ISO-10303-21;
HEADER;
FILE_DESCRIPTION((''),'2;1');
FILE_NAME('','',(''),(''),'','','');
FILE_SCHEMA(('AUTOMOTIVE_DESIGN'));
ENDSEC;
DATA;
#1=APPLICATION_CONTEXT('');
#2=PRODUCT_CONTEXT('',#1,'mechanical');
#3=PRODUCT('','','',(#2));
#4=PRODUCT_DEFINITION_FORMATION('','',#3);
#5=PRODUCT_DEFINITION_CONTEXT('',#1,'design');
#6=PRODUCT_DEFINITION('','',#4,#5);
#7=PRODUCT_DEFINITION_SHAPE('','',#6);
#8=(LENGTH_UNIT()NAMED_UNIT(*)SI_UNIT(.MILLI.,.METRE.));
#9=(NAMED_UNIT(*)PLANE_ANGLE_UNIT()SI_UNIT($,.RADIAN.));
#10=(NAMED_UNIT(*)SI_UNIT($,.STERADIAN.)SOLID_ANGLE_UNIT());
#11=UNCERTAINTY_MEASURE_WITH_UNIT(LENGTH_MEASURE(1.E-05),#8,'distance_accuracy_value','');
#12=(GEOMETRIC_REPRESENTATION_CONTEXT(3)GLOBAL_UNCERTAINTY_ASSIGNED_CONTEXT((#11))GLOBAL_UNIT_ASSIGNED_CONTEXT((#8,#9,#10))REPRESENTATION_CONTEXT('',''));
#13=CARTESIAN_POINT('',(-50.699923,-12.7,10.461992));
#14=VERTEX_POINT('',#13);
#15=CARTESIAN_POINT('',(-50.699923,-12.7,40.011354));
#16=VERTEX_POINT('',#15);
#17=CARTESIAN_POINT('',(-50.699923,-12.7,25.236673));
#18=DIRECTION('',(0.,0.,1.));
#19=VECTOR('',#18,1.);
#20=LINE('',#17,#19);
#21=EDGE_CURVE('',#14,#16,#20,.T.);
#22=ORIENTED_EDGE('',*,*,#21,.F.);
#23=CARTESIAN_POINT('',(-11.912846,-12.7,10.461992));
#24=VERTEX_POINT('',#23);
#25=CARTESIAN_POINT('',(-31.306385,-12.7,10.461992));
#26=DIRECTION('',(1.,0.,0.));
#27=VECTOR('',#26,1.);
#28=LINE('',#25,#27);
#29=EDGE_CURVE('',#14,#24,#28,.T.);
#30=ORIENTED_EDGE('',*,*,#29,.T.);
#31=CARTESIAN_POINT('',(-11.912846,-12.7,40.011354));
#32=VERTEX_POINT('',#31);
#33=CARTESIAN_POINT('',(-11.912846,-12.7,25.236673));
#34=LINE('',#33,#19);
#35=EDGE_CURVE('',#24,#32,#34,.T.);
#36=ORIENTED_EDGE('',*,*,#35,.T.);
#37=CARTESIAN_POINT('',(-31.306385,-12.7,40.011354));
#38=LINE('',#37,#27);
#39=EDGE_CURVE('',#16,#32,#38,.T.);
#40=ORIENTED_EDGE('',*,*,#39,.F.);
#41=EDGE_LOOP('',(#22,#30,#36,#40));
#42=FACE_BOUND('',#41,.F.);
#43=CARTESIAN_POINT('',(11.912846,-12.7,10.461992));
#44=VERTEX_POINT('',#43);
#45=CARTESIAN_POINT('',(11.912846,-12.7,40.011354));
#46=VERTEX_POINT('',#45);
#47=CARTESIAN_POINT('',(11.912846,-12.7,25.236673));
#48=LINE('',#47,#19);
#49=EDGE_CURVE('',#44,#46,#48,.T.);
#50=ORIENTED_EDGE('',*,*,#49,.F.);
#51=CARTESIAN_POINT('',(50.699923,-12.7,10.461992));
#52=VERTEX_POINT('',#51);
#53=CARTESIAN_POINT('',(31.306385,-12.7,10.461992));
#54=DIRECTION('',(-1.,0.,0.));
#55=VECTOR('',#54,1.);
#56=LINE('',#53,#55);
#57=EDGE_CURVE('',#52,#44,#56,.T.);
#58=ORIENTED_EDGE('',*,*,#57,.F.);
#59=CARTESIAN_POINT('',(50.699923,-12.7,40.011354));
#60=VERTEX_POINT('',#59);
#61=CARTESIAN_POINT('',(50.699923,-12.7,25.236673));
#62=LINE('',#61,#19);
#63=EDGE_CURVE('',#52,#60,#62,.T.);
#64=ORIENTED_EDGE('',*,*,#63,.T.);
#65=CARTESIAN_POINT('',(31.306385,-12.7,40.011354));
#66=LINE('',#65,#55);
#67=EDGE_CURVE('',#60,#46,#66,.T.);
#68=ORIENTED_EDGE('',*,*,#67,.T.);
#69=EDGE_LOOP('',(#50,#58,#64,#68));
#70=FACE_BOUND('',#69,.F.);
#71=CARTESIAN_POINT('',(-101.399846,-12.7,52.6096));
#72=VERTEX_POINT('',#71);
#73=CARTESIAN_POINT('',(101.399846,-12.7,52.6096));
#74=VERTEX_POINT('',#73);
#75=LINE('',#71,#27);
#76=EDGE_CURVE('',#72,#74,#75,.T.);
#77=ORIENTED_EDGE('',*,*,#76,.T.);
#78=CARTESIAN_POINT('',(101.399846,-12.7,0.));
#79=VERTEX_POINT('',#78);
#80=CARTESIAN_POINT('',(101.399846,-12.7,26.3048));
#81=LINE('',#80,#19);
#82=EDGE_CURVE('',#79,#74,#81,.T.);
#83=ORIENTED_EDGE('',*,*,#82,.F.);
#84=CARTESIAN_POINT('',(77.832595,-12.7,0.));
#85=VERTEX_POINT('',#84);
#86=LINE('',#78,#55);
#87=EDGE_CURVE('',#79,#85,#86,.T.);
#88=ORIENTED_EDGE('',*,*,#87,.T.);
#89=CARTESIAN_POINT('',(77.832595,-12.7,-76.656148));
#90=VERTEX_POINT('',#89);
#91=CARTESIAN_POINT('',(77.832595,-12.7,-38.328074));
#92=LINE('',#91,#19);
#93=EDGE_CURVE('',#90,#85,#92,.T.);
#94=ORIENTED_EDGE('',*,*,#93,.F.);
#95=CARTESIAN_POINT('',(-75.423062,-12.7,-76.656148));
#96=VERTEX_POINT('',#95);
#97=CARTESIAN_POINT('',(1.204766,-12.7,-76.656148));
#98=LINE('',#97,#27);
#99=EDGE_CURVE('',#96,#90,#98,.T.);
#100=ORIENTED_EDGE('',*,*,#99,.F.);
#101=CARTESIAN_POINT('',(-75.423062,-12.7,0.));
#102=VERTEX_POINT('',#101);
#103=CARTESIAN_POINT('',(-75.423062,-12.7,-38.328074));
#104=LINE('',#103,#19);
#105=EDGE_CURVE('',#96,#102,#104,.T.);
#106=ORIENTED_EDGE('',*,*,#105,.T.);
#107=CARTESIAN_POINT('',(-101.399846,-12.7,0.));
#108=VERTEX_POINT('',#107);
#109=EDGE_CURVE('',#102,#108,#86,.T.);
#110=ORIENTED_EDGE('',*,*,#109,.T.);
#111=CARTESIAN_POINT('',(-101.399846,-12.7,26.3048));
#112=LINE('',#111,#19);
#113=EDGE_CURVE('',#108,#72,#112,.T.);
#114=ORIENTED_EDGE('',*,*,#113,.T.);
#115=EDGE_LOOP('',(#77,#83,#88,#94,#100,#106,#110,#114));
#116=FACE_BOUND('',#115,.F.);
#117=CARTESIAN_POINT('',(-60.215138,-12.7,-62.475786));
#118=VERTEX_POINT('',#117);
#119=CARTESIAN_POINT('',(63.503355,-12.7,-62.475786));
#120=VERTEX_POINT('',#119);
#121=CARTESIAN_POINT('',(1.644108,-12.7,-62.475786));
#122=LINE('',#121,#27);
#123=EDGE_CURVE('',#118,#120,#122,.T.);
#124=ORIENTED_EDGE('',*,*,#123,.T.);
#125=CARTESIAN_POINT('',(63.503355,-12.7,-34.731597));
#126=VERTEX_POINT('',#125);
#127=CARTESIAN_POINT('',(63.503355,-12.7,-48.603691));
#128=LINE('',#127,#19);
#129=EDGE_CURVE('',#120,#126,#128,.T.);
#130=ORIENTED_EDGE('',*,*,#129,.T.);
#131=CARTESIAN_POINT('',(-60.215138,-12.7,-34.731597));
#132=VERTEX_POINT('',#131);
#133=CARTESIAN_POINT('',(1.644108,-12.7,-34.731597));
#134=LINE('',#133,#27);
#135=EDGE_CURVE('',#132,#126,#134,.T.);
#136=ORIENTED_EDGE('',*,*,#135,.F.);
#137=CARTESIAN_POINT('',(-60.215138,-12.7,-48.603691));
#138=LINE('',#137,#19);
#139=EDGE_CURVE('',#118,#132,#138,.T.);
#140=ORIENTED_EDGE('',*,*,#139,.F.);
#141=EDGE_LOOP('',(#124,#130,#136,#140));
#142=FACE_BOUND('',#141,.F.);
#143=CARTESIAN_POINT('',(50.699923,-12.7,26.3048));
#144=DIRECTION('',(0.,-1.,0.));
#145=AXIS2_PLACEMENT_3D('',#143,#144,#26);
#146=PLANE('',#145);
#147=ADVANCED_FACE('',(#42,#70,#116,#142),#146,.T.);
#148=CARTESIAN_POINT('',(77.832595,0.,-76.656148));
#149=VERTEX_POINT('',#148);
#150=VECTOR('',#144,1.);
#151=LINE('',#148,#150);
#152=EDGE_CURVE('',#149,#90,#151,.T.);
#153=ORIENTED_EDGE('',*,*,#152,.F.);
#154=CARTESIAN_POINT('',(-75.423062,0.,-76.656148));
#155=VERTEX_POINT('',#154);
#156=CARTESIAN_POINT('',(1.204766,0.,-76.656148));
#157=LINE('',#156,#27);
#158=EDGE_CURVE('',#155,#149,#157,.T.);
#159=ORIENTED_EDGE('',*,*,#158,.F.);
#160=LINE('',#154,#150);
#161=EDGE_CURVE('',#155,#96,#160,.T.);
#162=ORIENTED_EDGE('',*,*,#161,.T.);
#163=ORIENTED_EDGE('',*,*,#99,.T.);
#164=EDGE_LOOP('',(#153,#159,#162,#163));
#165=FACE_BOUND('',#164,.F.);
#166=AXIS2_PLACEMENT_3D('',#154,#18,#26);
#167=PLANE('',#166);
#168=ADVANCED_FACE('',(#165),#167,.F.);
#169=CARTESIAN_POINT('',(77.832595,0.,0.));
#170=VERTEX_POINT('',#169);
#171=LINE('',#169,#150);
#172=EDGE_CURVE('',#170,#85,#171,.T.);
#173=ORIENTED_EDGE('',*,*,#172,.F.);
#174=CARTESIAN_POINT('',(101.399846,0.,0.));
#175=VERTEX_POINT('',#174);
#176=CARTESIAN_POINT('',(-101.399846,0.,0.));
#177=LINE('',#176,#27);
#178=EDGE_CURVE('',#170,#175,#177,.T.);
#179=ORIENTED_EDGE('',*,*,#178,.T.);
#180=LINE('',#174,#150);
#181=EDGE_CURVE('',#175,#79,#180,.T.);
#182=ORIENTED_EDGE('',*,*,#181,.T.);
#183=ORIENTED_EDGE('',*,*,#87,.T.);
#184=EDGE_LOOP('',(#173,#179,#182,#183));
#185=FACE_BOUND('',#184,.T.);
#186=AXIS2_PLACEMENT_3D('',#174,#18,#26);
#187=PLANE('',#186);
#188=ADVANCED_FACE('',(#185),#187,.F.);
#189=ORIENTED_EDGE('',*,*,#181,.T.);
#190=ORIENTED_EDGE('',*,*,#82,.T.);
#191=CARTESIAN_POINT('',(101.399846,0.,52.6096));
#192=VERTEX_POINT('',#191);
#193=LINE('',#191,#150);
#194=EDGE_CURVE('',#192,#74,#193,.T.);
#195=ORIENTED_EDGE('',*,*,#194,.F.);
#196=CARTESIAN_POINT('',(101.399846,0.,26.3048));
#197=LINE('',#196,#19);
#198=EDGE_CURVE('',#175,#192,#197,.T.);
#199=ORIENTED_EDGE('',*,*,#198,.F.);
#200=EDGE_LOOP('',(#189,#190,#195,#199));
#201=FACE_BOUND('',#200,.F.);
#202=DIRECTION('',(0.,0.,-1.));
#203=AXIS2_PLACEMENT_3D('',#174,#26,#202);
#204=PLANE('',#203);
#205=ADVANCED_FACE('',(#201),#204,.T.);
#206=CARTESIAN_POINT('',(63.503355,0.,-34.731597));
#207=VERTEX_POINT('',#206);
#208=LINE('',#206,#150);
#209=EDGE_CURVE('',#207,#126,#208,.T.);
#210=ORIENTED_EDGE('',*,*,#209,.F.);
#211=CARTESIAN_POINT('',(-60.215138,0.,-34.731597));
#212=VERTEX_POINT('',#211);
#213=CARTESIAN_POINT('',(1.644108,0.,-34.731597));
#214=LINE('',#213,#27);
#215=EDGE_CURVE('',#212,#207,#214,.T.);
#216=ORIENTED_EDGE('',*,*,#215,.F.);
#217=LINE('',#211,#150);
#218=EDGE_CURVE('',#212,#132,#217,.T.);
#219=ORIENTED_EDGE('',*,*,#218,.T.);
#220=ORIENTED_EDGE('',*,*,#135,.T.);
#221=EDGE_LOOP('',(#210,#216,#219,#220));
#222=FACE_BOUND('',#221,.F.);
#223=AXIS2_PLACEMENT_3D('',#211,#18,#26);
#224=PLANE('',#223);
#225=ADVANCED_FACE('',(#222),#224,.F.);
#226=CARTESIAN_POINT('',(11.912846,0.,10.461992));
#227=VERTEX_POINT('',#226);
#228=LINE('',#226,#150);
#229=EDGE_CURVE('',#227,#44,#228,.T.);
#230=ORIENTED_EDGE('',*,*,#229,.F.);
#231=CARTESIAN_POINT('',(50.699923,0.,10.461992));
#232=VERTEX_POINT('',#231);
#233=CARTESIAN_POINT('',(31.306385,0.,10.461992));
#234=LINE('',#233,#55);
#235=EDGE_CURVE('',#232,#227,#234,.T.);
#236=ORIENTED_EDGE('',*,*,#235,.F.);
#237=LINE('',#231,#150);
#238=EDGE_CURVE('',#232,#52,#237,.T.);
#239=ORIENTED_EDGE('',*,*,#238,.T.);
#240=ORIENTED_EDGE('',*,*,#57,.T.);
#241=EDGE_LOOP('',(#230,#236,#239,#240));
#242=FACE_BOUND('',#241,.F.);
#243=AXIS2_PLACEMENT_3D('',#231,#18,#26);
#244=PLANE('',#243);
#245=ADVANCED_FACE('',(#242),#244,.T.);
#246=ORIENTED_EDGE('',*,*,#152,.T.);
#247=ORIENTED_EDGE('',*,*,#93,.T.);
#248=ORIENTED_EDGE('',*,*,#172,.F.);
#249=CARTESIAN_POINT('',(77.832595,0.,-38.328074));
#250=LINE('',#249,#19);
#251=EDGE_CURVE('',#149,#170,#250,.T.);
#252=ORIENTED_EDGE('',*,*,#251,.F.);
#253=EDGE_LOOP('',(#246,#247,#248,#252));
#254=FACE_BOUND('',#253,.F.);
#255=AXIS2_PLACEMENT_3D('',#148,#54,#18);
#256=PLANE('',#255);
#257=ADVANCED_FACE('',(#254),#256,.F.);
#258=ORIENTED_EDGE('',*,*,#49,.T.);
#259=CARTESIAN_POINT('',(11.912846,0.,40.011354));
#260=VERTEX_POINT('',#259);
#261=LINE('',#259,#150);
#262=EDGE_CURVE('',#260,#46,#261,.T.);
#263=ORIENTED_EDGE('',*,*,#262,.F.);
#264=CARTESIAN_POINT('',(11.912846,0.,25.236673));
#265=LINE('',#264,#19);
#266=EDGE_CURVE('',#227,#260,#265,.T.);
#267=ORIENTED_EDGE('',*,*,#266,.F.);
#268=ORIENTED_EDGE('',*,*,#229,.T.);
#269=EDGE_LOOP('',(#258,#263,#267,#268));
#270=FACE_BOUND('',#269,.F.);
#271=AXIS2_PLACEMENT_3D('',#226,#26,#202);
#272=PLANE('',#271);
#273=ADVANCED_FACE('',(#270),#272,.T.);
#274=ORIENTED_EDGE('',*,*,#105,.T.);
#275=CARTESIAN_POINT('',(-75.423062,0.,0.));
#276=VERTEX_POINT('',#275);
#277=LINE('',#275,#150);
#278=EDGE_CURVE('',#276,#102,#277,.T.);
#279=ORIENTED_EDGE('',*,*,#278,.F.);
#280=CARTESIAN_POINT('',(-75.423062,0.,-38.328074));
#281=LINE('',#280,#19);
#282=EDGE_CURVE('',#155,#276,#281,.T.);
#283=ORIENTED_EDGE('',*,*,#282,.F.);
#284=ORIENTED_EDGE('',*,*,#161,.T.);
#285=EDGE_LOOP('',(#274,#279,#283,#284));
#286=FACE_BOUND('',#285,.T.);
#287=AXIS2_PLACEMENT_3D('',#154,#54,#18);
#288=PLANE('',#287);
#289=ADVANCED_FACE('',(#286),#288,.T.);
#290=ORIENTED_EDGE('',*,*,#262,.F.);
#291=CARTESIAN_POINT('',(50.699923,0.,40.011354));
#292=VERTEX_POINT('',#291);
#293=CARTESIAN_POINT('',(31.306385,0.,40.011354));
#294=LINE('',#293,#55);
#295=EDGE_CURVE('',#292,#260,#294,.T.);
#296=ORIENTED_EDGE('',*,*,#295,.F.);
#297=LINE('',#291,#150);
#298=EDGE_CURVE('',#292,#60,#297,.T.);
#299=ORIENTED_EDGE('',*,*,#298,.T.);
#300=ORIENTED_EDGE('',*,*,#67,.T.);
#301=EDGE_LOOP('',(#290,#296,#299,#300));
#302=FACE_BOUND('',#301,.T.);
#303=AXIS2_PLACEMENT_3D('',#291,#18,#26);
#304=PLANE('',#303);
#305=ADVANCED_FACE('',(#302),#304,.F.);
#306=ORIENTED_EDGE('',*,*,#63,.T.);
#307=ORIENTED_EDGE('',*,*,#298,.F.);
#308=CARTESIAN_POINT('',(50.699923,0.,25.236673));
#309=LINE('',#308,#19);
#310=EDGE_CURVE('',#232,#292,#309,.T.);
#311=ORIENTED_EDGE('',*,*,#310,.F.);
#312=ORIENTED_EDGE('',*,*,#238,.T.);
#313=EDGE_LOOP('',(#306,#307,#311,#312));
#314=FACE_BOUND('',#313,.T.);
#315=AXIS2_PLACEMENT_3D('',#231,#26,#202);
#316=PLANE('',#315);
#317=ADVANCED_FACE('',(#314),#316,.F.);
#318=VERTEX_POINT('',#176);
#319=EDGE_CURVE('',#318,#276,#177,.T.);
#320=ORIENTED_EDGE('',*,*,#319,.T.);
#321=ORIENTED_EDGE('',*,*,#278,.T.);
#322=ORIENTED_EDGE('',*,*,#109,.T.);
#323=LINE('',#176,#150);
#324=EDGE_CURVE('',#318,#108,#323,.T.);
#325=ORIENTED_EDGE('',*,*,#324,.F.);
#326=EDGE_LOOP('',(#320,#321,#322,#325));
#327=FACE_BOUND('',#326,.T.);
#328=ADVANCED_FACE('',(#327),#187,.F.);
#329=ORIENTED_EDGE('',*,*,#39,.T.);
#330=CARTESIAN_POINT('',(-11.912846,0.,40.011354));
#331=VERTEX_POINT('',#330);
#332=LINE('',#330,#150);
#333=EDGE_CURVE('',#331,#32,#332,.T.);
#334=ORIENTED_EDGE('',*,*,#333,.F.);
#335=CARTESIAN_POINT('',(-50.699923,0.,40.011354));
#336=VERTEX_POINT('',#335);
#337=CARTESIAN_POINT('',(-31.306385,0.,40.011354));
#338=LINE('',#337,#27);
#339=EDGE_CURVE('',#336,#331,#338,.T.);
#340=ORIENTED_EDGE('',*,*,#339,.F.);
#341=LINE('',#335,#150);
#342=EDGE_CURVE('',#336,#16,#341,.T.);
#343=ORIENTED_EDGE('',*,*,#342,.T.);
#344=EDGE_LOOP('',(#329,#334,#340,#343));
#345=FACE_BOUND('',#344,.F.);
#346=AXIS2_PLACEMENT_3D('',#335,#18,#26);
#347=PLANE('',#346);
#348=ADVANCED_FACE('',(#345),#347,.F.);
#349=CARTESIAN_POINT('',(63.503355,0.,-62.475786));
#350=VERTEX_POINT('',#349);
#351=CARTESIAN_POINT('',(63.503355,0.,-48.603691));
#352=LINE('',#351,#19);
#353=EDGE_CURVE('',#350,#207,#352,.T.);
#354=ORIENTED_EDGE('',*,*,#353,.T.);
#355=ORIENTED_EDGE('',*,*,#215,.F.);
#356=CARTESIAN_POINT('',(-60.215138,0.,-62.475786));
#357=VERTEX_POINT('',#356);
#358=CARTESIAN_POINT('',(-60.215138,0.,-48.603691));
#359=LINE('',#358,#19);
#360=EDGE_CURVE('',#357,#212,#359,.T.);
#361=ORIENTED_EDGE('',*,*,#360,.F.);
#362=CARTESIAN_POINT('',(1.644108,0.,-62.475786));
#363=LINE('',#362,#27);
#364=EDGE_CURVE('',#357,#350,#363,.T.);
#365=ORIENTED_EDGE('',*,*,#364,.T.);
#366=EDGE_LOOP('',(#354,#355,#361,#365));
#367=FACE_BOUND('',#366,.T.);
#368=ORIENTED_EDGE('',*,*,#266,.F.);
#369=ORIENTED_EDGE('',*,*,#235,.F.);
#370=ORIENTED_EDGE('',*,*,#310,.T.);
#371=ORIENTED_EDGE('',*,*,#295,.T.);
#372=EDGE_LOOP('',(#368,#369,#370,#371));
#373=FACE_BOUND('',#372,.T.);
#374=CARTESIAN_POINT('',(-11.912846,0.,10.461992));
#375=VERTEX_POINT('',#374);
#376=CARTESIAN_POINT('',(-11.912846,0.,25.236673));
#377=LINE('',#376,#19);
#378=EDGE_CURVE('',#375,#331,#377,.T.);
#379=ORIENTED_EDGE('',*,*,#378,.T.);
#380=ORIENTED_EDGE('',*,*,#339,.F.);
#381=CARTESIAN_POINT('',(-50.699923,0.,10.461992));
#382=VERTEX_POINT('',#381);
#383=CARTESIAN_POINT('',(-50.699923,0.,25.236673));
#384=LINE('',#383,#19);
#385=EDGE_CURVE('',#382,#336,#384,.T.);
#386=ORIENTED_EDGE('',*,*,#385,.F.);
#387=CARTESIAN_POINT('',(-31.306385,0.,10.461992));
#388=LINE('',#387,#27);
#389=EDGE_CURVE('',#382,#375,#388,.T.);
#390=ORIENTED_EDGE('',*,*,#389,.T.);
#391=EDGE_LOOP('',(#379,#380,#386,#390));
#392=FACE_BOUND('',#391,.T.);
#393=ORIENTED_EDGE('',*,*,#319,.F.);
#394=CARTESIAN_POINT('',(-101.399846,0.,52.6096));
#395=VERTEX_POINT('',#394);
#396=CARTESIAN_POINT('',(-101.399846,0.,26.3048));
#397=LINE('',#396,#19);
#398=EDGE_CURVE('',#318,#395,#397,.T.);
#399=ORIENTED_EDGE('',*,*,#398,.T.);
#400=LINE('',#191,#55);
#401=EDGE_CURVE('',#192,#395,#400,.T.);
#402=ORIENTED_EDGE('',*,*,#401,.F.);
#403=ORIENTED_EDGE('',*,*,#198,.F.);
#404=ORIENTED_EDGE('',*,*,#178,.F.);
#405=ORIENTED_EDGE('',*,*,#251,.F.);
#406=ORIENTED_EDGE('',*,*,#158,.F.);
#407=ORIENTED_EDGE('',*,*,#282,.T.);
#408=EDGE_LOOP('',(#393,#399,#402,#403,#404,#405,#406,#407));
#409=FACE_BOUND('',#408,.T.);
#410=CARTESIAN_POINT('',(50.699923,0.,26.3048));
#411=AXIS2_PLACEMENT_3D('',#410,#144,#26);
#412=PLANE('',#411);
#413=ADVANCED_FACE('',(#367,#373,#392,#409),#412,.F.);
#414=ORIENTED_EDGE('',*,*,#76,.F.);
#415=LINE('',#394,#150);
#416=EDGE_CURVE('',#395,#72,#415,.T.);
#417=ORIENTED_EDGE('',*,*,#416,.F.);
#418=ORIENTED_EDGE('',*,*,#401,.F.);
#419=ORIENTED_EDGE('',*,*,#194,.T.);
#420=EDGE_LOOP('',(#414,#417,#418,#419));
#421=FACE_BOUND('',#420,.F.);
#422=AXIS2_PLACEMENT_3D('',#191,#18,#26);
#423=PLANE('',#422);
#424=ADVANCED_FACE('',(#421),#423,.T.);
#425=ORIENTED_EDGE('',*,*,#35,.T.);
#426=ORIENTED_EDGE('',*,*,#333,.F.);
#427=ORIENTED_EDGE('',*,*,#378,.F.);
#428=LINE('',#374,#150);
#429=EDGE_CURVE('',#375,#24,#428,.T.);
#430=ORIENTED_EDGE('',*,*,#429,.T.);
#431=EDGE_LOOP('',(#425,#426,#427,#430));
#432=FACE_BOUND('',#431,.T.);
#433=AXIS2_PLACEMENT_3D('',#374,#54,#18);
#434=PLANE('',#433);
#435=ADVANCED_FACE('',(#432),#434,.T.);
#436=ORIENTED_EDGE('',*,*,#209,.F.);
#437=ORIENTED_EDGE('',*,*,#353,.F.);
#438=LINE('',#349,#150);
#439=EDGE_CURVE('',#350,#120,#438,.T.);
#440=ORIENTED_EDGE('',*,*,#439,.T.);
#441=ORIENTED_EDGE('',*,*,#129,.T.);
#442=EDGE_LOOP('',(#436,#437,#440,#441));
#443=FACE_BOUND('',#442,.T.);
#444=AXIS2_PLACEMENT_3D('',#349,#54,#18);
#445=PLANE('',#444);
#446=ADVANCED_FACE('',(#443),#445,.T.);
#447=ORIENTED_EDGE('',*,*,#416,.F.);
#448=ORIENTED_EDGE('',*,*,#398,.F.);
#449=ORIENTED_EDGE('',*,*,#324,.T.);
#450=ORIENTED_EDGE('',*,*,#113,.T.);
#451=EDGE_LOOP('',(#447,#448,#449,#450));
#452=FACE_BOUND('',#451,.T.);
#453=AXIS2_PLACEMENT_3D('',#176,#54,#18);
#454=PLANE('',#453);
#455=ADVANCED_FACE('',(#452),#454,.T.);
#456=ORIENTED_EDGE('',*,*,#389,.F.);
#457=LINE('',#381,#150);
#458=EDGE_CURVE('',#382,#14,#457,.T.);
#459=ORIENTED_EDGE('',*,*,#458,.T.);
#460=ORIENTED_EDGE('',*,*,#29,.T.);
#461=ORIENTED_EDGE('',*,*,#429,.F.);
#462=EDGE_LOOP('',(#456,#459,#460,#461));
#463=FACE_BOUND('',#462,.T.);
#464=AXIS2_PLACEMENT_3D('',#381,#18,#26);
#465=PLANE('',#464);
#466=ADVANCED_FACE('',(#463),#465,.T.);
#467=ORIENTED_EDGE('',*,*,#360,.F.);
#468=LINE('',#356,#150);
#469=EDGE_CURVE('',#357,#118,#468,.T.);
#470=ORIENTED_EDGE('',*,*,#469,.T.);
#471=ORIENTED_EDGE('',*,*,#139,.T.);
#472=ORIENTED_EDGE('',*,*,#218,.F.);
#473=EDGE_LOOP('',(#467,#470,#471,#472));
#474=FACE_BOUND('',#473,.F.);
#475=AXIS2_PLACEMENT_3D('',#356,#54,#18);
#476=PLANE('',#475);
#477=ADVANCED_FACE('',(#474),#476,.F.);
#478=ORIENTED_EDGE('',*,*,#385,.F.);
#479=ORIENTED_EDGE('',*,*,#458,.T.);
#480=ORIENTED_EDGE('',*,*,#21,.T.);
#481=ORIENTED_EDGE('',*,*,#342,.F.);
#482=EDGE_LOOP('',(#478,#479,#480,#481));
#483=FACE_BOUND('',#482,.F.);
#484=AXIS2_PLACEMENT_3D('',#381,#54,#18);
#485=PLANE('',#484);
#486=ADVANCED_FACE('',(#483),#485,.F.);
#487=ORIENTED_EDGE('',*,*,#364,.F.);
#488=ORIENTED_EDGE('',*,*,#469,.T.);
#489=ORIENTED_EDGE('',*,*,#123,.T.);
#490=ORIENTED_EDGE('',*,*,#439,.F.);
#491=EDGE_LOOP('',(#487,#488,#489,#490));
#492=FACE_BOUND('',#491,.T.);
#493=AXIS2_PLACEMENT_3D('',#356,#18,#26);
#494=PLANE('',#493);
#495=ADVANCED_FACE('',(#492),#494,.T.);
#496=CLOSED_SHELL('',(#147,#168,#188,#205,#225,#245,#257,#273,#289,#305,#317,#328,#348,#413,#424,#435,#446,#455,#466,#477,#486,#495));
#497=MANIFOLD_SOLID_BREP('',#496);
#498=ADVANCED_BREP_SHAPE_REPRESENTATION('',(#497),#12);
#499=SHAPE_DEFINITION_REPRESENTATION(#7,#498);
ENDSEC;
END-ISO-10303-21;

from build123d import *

# Parameters (mm, degrees)
F0_W     = 101.399846375
F0_H     = 52.6096001267
F0_W_2   = 38.787077181
F0_H_2   = 29.5493621379
F1_DEPTH = 12.7
F3_W     = 153.2556563616
F3_H     = 76.6561478376
F3_W_2   = 123.7184926867
F3_H_2   = 27.7441889048
F4_DEPTH = 12.7


# Not quite as in the source:
# - the program builds the solid bodies; features that only make, move or delete a surface that nothing else refers to are left out


with BuildPart() as f1:
    # F0 (on Front) → F1 (new body)
    with BuildSketch(Plane.XZ):
        with Locations((-50.6999231875, 26.3048000634)):
            Rectangle(F0_W, F0_H)
        with Locations((-31.306384597, 25.2366727218)):
            Rectangle(F0_W_2, F0_H_2, mode=Mode.SUBTRACT)
    extrude(amount=F1_DEPTH)

    # F2: F1 across plane


with BuildPart() as f1_1:
    add(f1.part)
    add(f1.part.mirror(Plane.YZ))

    # F3 (on Front) → F4 (join)
    with BuildSketch(Plane.XZ):
        with Locations((1.2047663331, -38.3280739188)):
            Rectangle(F3_W, F3_H)
        with Locations((1.6441084445, -48.6036911607)):
            Rectangle(F3_W_2, F3_H_2, mode=Mode.SUBTRACT)
    extrude(amount=F4_DEPTH)


solid = f1_1.part
